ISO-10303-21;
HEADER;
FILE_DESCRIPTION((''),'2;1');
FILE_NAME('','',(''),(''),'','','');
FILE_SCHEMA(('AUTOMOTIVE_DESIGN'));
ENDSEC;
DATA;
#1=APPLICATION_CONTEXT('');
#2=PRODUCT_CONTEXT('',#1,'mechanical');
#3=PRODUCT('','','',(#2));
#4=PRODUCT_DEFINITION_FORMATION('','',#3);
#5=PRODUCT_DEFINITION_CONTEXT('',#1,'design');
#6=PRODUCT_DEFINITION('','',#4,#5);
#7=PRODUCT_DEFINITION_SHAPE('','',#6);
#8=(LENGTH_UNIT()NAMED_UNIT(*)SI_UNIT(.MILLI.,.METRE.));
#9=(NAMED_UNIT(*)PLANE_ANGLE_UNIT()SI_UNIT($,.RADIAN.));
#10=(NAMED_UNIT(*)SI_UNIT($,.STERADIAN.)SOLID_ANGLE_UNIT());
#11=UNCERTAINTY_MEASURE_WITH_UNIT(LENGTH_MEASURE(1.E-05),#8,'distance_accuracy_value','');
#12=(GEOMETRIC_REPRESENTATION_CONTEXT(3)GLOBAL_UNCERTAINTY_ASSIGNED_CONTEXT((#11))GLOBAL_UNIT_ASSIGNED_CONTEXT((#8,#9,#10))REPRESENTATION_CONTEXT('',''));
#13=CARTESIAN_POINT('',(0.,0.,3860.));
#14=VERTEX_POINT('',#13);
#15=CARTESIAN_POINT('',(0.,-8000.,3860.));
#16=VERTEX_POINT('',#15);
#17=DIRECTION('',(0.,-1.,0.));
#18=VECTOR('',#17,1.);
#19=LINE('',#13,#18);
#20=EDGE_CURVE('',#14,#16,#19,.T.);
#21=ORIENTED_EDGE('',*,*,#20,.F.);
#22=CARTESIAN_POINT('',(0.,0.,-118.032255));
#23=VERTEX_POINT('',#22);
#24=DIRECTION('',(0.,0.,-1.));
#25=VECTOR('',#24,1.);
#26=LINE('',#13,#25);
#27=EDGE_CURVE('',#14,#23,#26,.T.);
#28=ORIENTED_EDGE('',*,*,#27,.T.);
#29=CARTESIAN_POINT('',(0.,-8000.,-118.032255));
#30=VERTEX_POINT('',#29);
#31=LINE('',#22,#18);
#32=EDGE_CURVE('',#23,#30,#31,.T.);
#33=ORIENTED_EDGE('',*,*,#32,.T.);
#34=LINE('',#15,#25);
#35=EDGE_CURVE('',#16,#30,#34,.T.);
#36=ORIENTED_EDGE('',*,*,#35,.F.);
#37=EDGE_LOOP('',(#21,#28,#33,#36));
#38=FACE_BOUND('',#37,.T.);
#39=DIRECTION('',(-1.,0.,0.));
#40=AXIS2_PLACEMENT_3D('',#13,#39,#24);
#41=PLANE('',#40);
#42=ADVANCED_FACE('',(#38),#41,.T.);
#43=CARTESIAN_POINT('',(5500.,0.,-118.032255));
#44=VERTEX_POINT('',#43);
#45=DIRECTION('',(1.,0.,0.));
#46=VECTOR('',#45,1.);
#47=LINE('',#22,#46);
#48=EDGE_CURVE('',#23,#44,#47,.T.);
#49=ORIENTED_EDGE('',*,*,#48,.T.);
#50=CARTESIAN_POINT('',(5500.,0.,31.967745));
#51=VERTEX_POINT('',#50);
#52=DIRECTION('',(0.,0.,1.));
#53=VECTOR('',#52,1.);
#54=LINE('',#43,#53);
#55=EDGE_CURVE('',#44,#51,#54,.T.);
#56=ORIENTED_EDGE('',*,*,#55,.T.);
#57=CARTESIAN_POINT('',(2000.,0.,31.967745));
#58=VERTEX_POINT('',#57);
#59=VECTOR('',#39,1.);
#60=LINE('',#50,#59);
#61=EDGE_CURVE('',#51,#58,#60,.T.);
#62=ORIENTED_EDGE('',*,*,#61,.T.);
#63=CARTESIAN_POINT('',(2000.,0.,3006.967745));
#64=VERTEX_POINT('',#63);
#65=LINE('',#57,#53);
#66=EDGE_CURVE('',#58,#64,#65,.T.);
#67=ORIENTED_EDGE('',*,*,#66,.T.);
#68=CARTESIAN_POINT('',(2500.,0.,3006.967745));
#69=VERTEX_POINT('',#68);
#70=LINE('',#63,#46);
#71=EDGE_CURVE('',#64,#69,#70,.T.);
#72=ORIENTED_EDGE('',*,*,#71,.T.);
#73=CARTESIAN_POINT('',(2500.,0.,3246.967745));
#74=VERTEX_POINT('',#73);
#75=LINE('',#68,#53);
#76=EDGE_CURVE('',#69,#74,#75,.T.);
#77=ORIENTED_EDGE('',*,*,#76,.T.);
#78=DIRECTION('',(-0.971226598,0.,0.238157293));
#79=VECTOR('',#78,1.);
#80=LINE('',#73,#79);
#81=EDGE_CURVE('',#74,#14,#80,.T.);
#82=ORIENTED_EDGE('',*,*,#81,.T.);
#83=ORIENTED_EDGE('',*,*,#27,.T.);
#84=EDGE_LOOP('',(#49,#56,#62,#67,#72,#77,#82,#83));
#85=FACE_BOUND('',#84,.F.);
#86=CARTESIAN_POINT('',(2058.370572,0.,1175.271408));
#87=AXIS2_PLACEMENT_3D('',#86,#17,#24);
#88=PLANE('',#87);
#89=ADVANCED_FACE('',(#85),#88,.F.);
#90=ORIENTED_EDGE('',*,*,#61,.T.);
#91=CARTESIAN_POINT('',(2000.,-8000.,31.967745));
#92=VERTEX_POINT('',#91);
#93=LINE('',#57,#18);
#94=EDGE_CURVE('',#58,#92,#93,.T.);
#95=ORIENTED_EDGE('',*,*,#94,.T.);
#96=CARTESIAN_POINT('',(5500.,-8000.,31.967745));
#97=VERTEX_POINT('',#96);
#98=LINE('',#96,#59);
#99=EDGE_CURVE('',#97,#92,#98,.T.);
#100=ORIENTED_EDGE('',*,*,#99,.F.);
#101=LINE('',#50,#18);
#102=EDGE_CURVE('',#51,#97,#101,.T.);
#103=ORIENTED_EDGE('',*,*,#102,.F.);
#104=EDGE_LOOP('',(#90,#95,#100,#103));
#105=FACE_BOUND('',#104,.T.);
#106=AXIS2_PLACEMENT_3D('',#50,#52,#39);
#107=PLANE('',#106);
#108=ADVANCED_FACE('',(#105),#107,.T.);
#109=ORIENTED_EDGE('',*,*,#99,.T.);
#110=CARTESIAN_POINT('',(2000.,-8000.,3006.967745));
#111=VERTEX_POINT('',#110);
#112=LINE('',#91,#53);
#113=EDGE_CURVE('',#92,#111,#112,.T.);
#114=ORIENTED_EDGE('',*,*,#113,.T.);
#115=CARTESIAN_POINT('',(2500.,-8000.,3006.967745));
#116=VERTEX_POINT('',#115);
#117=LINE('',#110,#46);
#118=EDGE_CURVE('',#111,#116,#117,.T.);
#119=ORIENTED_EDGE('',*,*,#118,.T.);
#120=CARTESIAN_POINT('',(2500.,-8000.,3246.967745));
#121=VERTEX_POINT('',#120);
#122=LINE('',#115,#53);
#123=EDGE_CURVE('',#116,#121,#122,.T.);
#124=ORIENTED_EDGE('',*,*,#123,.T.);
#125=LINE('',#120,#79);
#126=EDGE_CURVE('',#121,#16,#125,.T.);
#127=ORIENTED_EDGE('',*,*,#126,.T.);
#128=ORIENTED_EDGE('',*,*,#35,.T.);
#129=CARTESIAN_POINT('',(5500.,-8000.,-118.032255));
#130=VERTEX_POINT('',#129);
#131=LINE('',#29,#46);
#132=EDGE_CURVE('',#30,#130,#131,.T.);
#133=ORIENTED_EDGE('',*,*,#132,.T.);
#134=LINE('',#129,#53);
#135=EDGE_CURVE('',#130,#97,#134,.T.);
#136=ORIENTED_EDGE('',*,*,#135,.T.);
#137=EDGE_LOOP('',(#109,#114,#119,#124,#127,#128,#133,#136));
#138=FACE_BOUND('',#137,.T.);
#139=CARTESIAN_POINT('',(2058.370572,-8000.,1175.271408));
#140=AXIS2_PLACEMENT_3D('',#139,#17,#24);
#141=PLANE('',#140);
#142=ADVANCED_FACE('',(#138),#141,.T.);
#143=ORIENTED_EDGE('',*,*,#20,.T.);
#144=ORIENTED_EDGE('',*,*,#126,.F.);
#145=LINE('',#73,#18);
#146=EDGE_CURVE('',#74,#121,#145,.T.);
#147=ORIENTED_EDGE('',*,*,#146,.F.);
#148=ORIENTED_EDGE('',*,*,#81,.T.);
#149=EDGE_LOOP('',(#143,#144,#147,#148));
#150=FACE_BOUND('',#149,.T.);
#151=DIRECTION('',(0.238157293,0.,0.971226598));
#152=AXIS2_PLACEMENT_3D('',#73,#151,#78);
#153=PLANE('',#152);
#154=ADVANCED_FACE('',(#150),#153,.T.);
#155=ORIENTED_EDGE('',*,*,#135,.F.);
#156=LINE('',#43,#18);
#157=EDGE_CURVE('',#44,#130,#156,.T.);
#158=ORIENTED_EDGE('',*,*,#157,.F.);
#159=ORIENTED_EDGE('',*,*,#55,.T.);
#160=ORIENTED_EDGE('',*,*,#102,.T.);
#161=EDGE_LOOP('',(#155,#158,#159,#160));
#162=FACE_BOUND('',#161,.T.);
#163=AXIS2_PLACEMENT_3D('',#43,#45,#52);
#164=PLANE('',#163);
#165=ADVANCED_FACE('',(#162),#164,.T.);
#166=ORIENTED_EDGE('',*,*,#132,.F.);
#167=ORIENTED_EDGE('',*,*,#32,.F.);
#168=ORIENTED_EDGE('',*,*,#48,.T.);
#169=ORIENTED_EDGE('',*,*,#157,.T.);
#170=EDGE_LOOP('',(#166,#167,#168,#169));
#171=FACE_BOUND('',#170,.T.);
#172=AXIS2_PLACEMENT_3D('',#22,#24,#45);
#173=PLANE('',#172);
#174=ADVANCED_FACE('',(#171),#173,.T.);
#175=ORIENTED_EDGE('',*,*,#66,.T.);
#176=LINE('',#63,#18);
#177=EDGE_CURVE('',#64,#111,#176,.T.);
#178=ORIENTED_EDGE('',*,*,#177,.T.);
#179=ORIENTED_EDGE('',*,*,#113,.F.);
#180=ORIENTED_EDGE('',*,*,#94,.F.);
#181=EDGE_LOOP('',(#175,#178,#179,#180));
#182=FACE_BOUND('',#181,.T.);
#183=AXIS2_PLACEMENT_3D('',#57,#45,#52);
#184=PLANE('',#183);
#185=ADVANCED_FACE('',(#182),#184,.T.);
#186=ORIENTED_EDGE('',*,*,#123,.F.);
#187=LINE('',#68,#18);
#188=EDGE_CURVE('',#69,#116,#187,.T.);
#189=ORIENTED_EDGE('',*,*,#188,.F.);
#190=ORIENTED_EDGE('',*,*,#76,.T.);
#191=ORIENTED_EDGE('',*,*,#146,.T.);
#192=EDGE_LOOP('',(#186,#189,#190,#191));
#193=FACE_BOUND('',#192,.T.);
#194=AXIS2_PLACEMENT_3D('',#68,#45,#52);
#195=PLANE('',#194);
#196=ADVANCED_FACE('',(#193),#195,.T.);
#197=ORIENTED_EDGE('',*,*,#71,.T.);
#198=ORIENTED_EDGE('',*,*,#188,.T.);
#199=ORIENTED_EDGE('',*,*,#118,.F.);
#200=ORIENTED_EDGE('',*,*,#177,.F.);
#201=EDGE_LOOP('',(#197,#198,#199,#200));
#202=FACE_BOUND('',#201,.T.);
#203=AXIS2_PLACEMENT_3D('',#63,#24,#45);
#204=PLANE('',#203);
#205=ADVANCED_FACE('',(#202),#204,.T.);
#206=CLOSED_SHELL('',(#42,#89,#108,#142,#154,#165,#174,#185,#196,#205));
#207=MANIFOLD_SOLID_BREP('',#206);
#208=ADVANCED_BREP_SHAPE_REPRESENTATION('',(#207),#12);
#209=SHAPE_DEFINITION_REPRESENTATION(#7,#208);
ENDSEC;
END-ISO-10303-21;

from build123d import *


# Not quite as in the source:
# - a feature names something its author has since deleted; it is built from what else it names


with BuildPart() as f2:
    # F2: sweep along a path in F1
    with BuildLine(Plane.YZ) as f2_path:
        Line((0, 0), (-8000, 0))
    # F0 (on Front) → F2 (sweep)
    with BuildSketch(Plane.XZ):
        Polygon((5500, 31.9677448273), (2000, 31.9677448273), (2000, 3006.9677448273), (2500, 3006.9677448273), (2500, 3246.9677448273), (0, 3860), (0, 0), (0, -118.0322551727), (5500, -118.0322551727), align=None)
    sweep(path=f2_path.line)


solid = f2.part
